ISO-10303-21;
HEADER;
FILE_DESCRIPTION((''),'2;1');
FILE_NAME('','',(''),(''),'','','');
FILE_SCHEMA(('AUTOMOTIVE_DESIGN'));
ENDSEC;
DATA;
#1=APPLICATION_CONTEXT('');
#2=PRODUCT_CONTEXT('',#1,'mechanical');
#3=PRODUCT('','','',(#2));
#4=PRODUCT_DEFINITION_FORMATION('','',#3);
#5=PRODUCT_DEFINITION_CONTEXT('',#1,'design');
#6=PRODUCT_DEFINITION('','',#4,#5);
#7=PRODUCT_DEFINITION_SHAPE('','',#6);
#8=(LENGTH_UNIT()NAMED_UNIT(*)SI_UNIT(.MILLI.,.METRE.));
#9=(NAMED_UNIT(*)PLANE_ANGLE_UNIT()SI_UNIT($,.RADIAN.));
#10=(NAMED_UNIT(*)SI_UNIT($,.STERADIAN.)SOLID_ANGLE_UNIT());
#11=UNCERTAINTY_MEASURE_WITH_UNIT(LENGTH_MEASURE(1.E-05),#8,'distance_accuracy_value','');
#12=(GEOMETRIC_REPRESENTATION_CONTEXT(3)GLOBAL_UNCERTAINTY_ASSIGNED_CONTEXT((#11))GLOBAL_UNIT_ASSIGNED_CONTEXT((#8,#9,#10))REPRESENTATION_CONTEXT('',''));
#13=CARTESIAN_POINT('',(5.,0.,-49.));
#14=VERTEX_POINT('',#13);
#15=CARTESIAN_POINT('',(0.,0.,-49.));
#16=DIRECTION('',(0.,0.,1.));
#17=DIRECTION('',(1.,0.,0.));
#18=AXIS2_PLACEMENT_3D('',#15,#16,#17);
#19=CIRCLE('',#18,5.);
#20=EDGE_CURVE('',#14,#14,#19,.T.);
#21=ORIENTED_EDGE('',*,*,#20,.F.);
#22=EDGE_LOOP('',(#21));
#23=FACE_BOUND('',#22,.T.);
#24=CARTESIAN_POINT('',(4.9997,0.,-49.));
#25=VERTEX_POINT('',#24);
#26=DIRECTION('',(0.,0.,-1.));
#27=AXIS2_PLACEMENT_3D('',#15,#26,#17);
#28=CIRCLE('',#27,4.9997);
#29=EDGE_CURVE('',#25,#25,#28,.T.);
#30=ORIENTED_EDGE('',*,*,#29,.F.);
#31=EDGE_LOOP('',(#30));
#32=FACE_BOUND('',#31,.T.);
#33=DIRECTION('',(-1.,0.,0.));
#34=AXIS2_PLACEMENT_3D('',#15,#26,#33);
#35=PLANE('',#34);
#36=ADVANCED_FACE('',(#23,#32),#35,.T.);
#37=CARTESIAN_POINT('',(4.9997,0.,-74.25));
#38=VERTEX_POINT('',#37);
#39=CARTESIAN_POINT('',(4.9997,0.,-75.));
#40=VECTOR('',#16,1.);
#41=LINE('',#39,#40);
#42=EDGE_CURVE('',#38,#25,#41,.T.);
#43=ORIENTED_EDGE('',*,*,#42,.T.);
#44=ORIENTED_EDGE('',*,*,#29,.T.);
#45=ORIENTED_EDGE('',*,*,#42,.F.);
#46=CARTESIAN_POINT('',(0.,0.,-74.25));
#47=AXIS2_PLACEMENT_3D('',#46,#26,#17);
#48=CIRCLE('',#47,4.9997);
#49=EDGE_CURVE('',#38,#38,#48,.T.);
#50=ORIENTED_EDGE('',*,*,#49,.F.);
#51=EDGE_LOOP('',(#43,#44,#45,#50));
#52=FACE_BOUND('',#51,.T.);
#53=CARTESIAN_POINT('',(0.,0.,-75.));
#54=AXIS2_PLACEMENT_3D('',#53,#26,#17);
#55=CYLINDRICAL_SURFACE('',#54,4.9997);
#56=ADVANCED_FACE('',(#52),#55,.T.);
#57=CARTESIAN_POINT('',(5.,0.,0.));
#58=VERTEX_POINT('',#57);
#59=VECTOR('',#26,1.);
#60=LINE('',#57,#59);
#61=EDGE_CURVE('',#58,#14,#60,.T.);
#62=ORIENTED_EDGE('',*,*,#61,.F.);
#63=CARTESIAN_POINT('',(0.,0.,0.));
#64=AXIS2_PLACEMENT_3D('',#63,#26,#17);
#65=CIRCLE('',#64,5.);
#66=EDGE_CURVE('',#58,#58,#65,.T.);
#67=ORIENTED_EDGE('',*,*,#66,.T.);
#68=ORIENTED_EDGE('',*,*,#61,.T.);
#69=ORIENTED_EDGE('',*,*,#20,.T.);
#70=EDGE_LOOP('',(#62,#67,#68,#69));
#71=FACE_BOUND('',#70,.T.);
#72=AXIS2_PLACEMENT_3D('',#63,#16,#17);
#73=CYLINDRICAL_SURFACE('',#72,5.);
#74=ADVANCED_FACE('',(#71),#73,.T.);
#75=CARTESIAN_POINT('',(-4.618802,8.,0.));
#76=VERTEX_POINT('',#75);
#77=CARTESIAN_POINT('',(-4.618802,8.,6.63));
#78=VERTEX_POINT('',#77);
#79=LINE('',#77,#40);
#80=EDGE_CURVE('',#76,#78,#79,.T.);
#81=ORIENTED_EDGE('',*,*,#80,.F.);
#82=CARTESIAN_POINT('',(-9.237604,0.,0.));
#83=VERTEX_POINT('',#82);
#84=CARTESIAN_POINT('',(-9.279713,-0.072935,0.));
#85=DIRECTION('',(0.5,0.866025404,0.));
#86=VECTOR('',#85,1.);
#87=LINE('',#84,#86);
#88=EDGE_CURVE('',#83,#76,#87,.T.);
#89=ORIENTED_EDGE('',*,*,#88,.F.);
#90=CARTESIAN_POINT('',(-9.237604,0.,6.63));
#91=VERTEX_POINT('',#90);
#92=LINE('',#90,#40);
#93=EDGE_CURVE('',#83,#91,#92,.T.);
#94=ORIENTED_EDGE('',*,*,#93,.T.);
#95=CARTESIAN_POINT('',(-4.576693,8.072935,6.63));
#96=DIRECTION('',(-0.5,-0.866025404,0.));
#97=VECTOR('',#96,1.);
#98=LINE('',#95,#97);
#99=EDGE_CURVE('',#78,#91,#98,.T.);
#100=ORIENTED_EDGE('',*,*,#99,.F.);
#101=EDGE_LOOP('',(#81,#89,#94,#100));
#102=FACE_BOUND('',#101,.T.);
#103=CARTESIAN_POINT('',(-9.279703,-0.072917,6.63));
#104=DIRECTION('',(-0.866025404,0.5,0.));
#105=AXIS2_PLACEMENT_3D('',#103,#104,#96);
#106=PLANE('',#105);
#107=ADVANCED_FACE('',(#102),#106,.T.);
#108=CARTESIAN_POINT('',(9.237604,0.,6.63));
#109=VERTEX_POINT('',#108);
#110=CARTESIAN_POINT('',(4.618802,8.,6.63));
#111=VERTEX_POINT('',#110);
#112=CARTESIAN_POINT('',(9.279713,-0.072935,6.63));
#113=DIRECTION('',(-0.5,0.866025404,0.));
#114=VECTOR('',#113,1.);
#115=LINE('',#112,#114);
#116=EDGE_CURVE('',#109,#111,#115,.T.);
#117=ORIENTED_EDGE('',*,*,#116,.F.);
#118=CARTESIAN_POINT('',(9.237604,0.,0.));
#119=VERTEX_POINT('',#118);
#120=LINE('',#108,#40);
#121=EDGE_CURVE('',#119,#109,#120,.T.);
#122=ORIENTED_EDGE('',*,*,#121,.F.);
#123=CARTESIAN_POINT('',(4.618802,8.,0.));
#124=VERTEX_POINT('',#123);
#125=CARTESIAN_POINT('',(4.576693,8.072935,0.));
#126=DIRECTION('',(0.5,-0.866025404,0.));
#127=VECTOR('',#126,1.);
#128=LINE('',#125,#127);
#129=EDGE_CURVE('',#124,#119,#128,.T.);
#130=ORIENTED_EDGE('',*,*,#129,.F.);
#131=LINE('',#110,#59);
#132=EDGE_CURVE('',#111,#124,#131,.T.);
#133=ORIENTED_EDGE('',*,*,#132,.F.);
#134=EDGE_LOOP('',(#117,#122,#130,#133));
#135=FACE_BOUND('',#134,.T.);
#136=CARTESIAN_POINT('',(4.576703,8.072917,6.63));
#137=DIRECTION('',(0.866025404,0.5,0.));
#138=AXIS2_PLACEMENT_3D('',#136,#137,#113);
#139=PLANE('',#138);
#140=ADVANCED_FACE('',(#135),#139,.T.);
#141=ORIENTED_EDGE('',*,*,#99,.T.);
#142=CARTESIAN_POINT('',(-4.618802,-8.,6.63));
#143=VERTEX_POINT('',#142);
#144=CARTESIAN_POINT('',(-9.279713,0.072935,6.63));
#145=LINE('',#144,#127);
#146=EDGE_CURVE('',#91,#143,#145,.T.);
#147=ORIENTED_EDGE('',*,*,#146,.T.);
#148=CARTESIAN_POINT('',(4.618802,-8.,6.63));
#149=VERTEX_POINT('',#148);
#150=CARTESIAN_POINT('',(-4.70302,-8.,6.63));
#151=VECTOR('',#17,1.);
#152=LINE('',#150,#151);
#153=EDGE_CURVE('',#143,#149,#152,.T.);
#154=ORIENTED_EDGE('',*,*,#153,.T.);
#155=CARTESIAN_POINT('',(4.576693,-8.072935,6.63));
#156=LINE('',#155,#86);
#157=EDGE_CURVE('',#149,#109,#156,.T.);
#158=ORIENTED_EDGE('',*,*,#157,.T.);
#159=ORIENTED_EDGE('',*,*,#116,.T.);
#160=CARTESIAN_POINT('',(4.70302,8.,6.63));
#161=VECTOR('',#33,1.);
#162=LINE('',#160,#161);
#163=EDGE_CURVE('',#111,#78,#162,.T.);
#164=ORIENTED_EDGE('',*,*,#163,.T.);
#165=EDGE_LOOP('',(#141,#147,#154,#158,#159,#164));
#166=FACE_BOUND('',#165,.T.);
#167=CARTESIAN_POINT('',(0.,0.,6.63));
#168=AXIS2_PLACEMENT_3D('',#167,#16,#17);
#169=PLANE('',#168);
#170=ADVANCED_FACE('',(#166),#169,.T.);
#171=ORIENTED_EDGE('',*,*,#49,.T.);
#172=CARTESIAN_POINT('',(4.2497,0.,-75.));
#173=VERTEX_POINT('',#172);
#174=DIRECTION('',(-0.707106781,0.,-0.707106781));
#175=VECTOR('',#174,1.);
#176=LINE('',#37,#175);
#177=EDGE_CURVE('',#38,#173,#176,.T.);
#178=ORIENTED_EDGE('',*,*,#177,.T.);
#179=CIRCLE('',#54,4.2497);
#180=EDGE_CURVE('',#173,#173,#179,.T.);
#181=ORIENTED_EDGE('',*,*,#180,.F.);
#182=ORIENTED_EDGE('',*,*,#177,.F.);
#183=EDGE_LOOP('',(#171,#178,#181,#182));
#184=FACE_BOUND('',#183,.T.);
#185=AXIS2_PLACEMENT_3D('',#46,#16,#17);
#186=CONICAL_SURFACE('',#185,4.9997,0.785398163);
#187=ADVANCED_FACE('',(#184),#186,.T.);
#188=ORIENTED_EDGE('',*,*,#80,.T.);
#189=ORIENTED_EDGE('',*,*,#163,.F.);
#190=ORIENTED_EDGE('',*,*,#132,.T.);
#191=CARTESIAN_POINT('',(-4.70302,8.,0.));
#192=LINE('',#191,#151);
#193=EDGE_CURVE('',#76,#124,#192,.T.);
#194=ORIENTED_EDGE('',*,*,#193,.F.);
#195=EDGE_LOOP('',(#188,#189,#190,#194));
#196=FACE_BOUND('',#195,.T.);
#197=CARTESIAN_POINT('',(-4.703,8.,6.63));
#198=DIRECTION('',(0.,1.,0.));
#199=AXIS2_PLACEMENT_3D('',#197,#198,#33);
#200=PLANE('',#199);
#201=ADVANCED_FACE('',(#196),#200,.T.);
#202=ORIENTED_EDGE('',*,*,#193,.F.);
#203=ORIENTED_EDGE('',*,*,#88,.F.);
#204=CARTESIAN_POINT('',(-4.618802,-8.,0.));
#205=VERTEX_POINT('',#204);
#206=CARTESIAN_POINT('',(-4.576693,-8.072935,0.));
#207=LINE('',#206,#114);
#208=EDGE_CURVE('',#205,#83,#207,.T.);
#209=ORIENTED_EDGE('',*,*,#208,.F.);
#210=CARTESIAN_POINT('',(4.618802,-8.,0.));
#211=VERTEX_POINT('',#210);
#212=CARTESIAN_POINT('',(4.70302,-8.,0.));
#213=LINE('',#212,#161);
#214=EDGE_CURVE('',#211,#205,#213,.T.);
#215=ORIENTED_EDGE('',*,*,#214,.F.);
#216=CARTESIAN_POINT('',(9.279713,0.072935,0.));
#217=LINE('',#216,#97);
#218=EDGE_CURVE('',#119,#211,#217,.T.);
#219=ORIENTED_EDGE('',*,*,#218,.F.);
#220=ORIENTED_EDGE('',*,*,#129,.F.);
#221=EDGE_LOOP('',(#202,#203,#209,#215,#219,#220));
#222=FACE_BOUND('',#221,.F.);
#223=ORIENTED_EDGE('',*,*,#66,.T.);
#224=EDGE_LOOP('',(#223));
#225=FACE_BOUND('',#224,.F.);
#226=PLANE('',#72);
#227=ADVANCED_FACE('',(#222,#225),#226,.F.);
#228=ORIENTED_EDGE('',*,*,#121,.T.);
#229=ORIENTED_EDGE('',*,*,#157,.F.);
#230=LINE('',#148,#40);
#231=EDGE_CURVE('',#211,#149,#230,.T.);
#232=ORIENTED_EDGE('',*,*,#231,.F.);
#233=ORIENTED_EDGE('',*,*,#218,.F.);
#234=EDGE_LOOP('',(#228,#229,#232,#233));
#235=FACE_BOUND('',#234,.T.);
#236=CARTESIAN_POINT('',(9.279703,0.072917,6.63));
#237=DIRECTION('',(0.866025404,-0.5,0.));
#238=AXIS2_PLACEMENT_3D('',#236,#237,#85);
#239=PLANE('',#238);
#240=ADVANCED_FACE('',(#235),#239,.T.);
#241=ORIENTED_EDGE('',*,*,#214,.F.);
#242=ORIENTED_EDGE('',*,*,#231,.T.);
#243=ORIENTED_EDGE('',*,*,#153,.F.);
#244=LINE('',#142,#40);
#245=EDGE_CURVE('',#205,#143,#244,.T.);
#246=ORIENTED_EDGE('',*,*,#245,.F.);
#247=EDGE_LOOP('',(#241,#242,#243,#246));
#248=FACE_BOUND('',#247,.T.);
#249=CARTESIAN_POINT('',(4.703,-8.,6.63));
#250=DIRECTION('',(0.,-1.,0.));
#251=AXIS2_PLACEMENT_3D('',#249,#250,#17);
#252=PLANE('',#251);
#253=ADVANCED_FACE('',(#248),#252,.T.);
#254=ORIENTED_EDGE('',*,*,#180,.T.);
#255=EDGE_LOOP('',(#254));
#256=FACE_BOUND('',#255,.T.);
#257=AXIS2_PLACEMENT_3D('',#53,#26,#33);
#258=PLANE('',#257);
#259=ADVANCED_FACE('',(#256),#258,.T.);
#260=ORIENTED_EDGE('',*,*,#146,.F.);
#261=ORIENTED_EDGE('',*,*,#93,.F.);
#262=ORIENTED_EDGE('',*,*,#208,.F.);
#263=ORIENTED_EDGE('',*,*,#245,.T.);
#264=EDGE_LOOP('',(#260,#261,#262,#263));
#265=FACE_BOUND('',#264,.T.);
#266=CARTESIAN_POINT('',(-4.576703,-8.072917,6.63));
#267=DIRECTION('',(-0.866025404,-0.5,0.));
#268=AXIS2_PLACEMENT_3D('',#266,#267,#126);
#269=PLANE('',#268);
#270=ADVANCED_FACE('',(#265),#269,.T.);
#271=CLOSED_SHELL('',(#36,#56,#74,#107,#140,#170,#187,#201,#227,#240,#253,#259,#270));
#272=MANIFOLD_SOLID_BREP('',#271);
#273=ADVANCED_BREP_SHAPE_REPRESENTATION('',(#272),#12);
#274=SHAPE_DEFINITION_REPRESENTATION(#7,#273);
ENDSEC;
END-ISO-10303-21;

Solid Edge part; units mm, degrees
sketch "Sketch1" plane through (0, 0, 0) normal (0, 0, 1) x (1, 0, 0)
  circle A0 centre (0, 0) radius 9.28
  dimension "D1" = 18.56
extrude "Protrusion1" add sketch "Sketch1" along normal blind 6.63
sketch "Sketch2" plane through (0, 0, 0) normal (0, 0, -1) x (1, 0, 0)
  circle A0 centre (0, 0) radius 5
extrude "Protrusion2" add sketch "Sketch2" along normal blind 75
sketch "Sketch3" plane through (0, 0, -75) normal (0, 0, -1) x (1, 0, 0)
  circle A0 centre (0, 0) radius 4.9997
extrude "Cutout1" cut sketch "Sketch3" against normal blind 26 flip side to cut
chamfer "Chamfer_1" distance 0.75 angle 45 1 edges at (-4.9997, 0, -75)
sketch "Sketch4" plane through (0, 0, 6.63) normal (0, 0, 1) x (1, 0, 0)
  line L0 (-4.703, 8) -> (4.703, 8)
  dimension "D1" = 16
extrude "Cutout2" cut sketch "Sketch4" against normal up to next material side at (0, 8.05, 6.63)
pattern_circular "Pattern1" count 6 over 360 about axis through (0, 0, 6.63) along (0, 0, 1) of "Cutout2"
properties part number "117876"
